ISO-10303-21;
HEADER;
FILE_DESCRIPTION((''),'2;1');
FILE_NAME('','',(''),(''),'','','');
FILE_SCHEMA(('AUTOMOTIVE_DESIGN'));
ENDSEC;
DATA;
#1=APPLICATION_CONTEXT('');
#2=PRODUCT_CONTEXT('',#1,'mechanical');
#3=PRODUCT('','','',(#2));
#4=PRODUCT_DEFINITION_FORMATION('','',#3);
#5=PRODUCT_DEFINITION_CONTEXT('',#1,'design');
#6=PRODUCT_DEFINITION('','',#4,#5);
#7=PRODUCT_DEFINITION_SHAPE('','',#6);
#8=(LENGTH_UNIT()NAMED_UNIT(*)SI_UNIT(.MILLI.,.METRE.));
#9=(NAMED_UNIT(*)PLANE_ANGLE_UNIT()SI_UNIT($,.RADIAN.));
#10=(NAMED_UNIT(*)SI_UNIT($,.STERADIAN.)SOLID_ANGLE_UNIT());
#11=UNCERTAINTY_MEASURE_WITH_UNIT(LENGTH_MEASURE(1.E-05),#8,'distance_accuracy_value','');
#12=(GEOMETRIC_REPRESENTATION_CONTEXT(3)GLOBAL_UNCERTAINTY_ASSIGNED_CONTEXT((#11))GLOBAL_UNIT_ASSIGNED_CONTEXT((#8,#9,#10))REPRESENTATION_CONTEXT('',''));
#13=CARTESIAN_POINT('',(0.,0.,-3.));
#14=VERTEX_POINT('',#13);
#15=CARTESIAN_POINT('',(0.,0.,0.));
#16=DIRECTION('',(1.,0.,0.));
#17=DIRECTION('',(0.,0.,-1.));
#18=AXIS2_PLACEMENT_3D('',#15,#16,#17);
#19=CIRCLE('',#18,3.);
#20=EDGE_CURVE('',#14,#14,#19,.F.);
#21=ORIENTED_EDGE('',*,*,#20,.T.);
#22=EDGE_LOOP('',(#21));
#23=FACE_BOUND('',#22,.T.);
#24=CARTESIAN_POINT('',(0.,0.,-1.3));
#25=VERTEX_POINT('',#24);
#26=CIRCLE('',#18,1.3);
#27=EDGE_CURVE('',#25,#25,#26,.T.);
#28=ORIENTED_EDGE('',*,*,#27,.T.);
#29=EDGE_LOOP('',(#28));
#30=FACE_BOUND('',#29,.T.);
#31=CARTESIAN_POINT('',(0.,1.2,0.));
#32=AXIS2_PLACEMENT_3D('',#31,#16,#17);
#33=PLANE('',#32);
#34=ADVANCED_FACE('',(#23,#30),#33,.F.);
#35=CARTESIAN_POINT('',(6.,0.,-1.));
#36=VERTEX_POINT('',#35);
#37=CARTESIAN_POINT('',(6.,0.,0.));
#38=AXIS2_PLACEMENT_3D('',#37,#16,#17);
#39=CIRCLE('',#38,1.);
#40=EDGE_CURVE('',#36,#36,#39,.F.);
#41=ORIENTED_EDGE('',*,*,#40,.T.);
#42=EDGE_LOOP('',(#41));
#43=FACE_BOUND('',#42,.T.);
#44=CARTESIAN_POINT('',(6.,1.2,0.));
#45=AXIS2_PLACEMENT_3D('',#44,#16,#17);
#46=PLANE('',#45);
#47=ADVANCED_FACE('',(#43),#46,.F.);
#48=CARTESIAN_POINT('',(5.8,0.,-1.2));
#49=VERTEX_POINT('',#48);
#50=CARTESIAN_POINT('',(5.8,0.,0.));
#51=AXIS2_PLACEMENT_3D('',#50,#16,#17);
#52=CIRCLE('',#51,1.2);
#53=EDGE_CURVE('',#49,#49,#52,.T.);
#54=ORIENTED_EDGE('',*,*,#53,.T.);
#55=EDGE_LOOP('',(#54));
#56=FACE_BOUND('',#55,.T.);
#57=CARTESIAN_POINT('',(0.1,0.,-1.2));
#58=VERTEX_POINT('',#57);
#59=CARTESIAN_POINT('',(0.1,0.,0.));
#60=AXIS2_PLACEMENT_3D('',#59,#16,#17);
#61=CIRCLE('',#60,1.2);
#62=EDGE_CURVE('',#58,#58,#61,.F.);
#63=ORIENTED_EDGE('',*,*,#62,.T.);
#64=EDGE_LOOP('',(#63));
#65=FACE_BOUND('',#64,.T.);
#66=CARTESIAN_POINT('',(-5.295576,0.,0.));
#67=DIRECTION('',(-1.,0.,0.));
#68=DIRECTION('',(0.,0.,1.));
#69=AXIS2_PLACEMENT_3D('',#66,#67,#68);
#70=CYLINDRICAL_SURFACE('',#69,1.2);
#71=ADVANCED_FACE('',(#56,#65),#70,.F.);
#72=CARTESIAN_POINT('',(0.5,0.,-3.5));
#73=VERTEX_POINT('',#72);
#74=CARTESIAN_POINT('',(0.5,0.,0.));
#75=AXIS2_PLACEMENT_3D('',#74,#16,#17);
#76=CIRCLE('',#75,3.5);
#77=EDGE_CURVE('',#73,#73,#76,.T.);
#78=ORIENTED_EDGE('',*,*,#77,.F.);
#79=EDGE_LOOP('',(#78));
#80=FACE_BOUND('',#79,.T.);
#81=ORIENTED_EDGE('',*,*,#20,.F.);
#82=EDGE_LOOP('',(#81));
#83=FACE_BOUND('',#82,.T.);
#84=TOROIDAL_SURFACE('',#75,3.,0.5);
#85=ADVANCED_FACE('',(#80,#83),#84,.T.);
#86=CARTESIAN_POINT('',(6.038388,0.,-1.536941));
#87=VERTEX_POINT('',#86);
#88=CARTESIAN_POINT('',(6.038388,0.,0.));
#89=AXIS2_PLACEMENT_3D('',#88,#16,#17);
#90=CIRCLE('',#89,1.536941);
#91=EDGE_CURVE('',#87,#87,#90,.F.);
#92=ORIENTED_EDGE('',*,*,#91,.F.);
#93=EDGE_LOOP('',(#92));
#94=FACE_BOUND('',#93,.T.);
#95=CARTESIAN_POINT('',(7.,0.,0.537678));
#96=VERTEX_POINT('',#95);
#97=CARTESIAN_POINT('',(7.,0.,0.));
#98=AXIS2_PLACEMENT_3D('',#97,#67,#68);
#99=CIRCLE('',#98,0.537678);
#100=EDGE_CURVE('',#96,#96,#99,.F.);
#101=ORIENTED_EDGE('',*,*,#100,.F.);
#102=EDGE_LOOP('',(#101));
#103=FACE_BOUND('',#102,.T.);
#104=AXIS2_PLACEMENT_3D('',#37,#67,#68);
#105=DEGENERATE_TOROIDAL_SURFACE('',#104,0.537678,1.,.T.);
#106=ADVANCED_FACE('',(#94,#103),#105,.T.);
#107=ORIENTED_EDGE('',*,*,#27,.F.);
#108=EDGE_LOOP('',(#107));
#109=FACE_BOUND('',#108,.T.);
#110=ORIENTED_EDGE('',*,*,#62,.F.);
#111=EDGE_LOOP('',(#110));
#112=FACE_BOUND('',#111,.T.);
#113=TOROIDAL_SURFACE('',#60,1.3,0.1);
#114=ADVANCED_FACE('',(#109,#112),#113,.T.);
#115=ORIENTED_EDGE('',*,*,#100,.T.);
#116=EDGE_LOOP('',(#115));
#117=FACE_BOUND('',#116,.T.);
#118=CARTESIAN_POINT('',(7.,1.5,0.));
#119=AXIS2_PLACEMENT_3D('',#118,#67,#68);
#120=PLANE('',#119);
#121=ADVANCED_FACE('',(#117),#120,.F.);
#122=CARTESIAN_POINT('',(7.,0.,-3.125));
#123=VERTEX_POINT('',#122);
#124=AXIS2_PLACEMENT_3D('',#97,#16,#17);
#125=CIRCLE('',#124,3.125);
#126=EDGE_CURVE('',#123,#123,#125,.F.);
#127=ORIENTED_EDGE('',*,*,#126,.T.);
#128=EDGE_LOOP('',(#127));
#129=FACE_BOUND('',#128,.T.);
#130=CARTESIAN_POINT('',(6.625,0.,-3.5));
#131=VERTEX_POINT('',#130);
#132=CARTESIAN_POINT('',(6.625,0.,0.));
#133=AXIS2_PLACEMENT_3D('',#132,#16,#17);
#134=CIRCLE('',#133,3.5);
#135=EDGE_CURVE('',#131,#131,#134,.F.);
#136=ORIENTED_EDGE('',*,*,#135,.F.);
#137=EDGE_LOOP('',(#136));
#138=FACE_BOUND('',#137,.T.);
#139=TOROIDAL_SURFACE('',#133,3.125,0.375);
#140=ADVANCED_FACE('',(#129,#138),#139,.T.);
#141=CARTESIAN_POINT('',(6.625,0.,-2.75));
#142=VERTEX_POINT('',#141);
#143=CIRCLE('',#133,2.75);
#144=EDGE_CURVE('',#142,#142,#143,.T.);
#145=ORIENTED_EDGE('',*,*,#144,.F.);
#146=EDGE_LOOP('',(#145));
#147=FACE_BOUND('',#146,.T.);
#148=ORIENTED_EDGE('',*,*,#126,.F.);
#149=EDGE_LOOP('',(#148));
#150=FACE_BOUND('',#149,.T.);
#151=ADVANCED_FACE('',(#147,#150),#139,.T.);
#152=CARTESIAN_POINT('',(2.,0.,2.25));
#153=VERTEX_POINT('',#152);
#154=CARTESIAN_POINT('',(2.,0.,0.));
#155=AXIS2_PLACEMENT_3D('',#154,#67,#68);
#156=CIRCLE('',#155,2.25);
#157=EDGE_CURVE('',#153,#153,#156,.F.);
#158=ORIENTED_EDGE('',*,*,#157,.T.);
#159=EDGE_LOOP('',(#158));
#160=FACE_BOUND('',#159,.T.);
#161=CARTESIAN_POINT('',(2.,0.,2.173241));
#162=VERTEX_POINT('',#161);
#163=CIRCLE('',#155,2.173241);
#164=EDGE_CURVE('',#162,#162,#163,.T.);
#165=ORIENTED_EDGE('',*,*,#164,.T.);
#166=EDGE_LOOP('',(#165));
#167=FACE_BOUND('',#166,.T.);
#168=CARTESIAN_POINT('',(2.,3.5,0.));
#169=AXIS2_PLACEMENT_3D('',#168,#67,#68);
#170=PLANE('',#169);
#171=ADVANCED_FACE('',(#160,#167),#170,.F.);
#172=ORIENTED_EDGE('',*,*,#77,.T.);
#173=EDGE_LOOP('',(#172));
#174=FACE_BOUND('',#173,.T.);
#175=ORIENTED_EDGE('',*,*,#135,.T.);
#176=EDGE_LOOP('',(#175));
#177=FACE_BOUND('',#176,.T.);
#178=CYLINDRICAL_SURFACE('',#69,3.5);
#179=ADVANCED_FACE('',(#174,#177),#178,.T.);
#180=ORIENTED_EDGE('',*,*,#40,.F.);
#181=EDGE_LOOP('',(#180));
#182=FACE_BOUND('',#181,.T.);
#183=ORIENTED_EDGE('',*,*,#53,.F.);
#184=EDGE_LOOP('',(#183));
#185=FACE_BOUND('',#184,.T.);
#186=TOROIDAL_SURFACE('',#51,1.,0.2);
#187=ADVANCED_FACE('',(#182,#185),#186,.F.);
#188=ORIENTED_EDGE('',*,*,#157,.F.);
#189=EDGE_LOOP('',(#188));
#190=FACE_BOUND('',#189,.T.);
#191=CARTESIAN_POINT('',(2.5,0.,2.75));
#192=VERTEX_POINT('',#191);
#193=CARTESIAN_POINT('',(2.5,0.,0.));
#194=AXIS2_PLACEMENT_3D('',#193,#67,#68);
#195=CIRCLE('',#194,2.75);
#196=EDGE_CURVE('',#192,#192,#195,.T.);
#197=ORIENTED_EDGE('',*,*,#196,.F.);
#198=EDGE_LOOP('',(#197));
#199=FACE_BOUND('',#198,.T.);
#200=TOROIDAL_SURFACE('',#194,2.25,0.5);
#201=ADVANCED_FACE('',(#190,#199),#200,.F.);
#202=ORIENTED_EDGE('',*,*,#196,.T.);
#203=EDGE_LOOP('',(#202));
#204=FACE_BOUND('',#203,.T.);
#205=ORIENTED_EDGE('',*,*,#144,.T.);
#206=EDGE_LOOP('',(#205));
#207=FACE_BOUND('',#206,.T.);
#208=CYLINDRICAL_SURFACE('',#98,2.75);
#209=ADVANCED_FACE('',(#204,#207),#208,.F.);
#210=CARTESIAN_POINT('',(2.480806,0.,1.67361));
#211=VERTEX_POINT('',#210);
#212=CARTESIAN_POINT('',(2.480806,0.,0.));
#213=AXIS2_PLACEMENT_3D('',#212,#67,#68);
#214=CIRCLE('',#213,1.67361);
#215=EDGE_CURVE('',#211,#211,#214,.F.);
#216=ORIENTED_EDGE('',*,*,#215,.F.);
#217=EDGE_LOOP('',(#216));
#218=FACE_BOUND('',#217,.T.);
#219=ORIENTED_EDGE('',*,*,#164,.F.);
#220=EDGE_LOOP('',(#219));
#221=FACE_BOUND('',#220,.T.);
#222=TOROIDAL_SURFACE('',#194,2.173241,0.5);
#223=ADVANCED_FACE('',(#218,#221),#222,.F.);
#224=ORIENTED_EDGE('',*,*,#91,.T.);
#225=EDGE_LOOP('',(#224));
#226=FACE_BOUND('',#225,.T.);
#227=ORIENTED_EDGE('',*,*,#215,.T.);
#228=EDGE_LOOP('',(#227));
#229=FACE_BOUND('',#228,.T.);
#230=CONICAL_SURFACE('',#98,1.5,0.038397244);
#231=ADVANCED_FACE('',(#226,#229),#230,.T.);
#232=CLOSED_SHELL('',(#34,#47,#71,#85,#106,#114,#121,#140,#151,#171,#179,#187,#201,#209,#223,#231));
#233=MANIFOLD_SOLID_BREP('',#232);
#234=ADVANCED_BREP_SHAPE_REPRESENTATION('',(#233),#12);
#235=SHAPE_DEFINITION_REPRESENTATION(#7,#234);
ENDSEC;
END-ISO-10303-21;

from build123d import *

# Parameters (mm, degrees)
ESTRUSIONE_ESTRUSIONE1_START = 5
SCHIZZO2_R                   = 3.5
SCHIZZO2_R_2                 = 2.75
ESTRUSIONE_ESTRUSIONE1_DEPTH = 5
RACCORDO2_R                  = 0.1
RACCORDO3_R                  = 0.2
RACCORDO6_R                  = 1
RACCORDO7_R                  = 0.375
RACCORDO8_R                  = 0.5


with BuildPart() as part:
    # Schizzo1 → Rivoluzione1 (revolve)
    with BuildSketch(Plane.XY, mode=Mode.PRIVATE) as rivoluzione1_sk:
        Polygon((0, 1.2), (0, 3.5), (2, 3.5), (2, 1.692080625), (7, 1.5), (7, 0), (6, 0), (6, 1.2), align=None)
    revolve(rivoluzione1_sk.sketch.rotate(Axis((-5.29557582, 0, 0), (1, 0, 0)), 90), axis=Axis((-5.29557582, 0, 0), (1, 0, 0)))

    # Schizzo2 → Estrusione-Estrusione1 (add)
    with BuildSketch(Plane(origin=(2, 0, 0), x_dir=(0, 0, -1), z_dir=(1, 0, 0)).offset(ESTRUSIONE_ESTRUSIONE1_START)):
        with Locations(Location((0, 0, 0), (0, 0, 180))):
            Circle(SCHIZZO2_R)
        Circle(SCHIZZO2_R_2, mode=Mode.SUBTRACT)
    extrude(amount=-ESTRUSIONE_ESTRUSIONE1_DEPTH)

    # Raccordo2
    raccordo2_edges = [part.edges().sort_by_distance(p)[0] for p in [
        (0, 0, -1.2),
    ]]
    fillet(raccordo2_edges, radius=RACCORDO2_R)

    # Raccordo3
    raccordo3_edges = [part.edges().sort_by_distance(p)[0] for p in [
        (6, 0, -1.2),
    ]]
    fillet(raccordo3_edges, radius=RACCORDO3_R)

    # Raccordo6
    raccordo6_edges = [part.edges().sort_by_distance(p)[0] for p in [
        (7, 0, -1.5),
    ]]
    fillet(raccordo6_edges, radius=RACCORDO6_R)

    # Raccordo7
    raccordo7_edges = [part.edges().sort_by_distance(p)[0] for p in [
        (7, 0, -3.5),
        (7, 0, 2.75),
    ]]
    fillet(raccordo7_edges, radius=RACCORDO7_R - 0.0001)  # a hair under: the kernel refuses the full size

    # Raccordo8
    raccordo8_edges = [part.edges().sort_by_distance(p)[0] for p in [
        (2, 0, 2.75),
        (2, 0, -1.692080625),
        (0, 0, -3.5),
    ]]
    fillet(raccordo8_edges, radius=RACCORDO8_R)


solid = part.part
